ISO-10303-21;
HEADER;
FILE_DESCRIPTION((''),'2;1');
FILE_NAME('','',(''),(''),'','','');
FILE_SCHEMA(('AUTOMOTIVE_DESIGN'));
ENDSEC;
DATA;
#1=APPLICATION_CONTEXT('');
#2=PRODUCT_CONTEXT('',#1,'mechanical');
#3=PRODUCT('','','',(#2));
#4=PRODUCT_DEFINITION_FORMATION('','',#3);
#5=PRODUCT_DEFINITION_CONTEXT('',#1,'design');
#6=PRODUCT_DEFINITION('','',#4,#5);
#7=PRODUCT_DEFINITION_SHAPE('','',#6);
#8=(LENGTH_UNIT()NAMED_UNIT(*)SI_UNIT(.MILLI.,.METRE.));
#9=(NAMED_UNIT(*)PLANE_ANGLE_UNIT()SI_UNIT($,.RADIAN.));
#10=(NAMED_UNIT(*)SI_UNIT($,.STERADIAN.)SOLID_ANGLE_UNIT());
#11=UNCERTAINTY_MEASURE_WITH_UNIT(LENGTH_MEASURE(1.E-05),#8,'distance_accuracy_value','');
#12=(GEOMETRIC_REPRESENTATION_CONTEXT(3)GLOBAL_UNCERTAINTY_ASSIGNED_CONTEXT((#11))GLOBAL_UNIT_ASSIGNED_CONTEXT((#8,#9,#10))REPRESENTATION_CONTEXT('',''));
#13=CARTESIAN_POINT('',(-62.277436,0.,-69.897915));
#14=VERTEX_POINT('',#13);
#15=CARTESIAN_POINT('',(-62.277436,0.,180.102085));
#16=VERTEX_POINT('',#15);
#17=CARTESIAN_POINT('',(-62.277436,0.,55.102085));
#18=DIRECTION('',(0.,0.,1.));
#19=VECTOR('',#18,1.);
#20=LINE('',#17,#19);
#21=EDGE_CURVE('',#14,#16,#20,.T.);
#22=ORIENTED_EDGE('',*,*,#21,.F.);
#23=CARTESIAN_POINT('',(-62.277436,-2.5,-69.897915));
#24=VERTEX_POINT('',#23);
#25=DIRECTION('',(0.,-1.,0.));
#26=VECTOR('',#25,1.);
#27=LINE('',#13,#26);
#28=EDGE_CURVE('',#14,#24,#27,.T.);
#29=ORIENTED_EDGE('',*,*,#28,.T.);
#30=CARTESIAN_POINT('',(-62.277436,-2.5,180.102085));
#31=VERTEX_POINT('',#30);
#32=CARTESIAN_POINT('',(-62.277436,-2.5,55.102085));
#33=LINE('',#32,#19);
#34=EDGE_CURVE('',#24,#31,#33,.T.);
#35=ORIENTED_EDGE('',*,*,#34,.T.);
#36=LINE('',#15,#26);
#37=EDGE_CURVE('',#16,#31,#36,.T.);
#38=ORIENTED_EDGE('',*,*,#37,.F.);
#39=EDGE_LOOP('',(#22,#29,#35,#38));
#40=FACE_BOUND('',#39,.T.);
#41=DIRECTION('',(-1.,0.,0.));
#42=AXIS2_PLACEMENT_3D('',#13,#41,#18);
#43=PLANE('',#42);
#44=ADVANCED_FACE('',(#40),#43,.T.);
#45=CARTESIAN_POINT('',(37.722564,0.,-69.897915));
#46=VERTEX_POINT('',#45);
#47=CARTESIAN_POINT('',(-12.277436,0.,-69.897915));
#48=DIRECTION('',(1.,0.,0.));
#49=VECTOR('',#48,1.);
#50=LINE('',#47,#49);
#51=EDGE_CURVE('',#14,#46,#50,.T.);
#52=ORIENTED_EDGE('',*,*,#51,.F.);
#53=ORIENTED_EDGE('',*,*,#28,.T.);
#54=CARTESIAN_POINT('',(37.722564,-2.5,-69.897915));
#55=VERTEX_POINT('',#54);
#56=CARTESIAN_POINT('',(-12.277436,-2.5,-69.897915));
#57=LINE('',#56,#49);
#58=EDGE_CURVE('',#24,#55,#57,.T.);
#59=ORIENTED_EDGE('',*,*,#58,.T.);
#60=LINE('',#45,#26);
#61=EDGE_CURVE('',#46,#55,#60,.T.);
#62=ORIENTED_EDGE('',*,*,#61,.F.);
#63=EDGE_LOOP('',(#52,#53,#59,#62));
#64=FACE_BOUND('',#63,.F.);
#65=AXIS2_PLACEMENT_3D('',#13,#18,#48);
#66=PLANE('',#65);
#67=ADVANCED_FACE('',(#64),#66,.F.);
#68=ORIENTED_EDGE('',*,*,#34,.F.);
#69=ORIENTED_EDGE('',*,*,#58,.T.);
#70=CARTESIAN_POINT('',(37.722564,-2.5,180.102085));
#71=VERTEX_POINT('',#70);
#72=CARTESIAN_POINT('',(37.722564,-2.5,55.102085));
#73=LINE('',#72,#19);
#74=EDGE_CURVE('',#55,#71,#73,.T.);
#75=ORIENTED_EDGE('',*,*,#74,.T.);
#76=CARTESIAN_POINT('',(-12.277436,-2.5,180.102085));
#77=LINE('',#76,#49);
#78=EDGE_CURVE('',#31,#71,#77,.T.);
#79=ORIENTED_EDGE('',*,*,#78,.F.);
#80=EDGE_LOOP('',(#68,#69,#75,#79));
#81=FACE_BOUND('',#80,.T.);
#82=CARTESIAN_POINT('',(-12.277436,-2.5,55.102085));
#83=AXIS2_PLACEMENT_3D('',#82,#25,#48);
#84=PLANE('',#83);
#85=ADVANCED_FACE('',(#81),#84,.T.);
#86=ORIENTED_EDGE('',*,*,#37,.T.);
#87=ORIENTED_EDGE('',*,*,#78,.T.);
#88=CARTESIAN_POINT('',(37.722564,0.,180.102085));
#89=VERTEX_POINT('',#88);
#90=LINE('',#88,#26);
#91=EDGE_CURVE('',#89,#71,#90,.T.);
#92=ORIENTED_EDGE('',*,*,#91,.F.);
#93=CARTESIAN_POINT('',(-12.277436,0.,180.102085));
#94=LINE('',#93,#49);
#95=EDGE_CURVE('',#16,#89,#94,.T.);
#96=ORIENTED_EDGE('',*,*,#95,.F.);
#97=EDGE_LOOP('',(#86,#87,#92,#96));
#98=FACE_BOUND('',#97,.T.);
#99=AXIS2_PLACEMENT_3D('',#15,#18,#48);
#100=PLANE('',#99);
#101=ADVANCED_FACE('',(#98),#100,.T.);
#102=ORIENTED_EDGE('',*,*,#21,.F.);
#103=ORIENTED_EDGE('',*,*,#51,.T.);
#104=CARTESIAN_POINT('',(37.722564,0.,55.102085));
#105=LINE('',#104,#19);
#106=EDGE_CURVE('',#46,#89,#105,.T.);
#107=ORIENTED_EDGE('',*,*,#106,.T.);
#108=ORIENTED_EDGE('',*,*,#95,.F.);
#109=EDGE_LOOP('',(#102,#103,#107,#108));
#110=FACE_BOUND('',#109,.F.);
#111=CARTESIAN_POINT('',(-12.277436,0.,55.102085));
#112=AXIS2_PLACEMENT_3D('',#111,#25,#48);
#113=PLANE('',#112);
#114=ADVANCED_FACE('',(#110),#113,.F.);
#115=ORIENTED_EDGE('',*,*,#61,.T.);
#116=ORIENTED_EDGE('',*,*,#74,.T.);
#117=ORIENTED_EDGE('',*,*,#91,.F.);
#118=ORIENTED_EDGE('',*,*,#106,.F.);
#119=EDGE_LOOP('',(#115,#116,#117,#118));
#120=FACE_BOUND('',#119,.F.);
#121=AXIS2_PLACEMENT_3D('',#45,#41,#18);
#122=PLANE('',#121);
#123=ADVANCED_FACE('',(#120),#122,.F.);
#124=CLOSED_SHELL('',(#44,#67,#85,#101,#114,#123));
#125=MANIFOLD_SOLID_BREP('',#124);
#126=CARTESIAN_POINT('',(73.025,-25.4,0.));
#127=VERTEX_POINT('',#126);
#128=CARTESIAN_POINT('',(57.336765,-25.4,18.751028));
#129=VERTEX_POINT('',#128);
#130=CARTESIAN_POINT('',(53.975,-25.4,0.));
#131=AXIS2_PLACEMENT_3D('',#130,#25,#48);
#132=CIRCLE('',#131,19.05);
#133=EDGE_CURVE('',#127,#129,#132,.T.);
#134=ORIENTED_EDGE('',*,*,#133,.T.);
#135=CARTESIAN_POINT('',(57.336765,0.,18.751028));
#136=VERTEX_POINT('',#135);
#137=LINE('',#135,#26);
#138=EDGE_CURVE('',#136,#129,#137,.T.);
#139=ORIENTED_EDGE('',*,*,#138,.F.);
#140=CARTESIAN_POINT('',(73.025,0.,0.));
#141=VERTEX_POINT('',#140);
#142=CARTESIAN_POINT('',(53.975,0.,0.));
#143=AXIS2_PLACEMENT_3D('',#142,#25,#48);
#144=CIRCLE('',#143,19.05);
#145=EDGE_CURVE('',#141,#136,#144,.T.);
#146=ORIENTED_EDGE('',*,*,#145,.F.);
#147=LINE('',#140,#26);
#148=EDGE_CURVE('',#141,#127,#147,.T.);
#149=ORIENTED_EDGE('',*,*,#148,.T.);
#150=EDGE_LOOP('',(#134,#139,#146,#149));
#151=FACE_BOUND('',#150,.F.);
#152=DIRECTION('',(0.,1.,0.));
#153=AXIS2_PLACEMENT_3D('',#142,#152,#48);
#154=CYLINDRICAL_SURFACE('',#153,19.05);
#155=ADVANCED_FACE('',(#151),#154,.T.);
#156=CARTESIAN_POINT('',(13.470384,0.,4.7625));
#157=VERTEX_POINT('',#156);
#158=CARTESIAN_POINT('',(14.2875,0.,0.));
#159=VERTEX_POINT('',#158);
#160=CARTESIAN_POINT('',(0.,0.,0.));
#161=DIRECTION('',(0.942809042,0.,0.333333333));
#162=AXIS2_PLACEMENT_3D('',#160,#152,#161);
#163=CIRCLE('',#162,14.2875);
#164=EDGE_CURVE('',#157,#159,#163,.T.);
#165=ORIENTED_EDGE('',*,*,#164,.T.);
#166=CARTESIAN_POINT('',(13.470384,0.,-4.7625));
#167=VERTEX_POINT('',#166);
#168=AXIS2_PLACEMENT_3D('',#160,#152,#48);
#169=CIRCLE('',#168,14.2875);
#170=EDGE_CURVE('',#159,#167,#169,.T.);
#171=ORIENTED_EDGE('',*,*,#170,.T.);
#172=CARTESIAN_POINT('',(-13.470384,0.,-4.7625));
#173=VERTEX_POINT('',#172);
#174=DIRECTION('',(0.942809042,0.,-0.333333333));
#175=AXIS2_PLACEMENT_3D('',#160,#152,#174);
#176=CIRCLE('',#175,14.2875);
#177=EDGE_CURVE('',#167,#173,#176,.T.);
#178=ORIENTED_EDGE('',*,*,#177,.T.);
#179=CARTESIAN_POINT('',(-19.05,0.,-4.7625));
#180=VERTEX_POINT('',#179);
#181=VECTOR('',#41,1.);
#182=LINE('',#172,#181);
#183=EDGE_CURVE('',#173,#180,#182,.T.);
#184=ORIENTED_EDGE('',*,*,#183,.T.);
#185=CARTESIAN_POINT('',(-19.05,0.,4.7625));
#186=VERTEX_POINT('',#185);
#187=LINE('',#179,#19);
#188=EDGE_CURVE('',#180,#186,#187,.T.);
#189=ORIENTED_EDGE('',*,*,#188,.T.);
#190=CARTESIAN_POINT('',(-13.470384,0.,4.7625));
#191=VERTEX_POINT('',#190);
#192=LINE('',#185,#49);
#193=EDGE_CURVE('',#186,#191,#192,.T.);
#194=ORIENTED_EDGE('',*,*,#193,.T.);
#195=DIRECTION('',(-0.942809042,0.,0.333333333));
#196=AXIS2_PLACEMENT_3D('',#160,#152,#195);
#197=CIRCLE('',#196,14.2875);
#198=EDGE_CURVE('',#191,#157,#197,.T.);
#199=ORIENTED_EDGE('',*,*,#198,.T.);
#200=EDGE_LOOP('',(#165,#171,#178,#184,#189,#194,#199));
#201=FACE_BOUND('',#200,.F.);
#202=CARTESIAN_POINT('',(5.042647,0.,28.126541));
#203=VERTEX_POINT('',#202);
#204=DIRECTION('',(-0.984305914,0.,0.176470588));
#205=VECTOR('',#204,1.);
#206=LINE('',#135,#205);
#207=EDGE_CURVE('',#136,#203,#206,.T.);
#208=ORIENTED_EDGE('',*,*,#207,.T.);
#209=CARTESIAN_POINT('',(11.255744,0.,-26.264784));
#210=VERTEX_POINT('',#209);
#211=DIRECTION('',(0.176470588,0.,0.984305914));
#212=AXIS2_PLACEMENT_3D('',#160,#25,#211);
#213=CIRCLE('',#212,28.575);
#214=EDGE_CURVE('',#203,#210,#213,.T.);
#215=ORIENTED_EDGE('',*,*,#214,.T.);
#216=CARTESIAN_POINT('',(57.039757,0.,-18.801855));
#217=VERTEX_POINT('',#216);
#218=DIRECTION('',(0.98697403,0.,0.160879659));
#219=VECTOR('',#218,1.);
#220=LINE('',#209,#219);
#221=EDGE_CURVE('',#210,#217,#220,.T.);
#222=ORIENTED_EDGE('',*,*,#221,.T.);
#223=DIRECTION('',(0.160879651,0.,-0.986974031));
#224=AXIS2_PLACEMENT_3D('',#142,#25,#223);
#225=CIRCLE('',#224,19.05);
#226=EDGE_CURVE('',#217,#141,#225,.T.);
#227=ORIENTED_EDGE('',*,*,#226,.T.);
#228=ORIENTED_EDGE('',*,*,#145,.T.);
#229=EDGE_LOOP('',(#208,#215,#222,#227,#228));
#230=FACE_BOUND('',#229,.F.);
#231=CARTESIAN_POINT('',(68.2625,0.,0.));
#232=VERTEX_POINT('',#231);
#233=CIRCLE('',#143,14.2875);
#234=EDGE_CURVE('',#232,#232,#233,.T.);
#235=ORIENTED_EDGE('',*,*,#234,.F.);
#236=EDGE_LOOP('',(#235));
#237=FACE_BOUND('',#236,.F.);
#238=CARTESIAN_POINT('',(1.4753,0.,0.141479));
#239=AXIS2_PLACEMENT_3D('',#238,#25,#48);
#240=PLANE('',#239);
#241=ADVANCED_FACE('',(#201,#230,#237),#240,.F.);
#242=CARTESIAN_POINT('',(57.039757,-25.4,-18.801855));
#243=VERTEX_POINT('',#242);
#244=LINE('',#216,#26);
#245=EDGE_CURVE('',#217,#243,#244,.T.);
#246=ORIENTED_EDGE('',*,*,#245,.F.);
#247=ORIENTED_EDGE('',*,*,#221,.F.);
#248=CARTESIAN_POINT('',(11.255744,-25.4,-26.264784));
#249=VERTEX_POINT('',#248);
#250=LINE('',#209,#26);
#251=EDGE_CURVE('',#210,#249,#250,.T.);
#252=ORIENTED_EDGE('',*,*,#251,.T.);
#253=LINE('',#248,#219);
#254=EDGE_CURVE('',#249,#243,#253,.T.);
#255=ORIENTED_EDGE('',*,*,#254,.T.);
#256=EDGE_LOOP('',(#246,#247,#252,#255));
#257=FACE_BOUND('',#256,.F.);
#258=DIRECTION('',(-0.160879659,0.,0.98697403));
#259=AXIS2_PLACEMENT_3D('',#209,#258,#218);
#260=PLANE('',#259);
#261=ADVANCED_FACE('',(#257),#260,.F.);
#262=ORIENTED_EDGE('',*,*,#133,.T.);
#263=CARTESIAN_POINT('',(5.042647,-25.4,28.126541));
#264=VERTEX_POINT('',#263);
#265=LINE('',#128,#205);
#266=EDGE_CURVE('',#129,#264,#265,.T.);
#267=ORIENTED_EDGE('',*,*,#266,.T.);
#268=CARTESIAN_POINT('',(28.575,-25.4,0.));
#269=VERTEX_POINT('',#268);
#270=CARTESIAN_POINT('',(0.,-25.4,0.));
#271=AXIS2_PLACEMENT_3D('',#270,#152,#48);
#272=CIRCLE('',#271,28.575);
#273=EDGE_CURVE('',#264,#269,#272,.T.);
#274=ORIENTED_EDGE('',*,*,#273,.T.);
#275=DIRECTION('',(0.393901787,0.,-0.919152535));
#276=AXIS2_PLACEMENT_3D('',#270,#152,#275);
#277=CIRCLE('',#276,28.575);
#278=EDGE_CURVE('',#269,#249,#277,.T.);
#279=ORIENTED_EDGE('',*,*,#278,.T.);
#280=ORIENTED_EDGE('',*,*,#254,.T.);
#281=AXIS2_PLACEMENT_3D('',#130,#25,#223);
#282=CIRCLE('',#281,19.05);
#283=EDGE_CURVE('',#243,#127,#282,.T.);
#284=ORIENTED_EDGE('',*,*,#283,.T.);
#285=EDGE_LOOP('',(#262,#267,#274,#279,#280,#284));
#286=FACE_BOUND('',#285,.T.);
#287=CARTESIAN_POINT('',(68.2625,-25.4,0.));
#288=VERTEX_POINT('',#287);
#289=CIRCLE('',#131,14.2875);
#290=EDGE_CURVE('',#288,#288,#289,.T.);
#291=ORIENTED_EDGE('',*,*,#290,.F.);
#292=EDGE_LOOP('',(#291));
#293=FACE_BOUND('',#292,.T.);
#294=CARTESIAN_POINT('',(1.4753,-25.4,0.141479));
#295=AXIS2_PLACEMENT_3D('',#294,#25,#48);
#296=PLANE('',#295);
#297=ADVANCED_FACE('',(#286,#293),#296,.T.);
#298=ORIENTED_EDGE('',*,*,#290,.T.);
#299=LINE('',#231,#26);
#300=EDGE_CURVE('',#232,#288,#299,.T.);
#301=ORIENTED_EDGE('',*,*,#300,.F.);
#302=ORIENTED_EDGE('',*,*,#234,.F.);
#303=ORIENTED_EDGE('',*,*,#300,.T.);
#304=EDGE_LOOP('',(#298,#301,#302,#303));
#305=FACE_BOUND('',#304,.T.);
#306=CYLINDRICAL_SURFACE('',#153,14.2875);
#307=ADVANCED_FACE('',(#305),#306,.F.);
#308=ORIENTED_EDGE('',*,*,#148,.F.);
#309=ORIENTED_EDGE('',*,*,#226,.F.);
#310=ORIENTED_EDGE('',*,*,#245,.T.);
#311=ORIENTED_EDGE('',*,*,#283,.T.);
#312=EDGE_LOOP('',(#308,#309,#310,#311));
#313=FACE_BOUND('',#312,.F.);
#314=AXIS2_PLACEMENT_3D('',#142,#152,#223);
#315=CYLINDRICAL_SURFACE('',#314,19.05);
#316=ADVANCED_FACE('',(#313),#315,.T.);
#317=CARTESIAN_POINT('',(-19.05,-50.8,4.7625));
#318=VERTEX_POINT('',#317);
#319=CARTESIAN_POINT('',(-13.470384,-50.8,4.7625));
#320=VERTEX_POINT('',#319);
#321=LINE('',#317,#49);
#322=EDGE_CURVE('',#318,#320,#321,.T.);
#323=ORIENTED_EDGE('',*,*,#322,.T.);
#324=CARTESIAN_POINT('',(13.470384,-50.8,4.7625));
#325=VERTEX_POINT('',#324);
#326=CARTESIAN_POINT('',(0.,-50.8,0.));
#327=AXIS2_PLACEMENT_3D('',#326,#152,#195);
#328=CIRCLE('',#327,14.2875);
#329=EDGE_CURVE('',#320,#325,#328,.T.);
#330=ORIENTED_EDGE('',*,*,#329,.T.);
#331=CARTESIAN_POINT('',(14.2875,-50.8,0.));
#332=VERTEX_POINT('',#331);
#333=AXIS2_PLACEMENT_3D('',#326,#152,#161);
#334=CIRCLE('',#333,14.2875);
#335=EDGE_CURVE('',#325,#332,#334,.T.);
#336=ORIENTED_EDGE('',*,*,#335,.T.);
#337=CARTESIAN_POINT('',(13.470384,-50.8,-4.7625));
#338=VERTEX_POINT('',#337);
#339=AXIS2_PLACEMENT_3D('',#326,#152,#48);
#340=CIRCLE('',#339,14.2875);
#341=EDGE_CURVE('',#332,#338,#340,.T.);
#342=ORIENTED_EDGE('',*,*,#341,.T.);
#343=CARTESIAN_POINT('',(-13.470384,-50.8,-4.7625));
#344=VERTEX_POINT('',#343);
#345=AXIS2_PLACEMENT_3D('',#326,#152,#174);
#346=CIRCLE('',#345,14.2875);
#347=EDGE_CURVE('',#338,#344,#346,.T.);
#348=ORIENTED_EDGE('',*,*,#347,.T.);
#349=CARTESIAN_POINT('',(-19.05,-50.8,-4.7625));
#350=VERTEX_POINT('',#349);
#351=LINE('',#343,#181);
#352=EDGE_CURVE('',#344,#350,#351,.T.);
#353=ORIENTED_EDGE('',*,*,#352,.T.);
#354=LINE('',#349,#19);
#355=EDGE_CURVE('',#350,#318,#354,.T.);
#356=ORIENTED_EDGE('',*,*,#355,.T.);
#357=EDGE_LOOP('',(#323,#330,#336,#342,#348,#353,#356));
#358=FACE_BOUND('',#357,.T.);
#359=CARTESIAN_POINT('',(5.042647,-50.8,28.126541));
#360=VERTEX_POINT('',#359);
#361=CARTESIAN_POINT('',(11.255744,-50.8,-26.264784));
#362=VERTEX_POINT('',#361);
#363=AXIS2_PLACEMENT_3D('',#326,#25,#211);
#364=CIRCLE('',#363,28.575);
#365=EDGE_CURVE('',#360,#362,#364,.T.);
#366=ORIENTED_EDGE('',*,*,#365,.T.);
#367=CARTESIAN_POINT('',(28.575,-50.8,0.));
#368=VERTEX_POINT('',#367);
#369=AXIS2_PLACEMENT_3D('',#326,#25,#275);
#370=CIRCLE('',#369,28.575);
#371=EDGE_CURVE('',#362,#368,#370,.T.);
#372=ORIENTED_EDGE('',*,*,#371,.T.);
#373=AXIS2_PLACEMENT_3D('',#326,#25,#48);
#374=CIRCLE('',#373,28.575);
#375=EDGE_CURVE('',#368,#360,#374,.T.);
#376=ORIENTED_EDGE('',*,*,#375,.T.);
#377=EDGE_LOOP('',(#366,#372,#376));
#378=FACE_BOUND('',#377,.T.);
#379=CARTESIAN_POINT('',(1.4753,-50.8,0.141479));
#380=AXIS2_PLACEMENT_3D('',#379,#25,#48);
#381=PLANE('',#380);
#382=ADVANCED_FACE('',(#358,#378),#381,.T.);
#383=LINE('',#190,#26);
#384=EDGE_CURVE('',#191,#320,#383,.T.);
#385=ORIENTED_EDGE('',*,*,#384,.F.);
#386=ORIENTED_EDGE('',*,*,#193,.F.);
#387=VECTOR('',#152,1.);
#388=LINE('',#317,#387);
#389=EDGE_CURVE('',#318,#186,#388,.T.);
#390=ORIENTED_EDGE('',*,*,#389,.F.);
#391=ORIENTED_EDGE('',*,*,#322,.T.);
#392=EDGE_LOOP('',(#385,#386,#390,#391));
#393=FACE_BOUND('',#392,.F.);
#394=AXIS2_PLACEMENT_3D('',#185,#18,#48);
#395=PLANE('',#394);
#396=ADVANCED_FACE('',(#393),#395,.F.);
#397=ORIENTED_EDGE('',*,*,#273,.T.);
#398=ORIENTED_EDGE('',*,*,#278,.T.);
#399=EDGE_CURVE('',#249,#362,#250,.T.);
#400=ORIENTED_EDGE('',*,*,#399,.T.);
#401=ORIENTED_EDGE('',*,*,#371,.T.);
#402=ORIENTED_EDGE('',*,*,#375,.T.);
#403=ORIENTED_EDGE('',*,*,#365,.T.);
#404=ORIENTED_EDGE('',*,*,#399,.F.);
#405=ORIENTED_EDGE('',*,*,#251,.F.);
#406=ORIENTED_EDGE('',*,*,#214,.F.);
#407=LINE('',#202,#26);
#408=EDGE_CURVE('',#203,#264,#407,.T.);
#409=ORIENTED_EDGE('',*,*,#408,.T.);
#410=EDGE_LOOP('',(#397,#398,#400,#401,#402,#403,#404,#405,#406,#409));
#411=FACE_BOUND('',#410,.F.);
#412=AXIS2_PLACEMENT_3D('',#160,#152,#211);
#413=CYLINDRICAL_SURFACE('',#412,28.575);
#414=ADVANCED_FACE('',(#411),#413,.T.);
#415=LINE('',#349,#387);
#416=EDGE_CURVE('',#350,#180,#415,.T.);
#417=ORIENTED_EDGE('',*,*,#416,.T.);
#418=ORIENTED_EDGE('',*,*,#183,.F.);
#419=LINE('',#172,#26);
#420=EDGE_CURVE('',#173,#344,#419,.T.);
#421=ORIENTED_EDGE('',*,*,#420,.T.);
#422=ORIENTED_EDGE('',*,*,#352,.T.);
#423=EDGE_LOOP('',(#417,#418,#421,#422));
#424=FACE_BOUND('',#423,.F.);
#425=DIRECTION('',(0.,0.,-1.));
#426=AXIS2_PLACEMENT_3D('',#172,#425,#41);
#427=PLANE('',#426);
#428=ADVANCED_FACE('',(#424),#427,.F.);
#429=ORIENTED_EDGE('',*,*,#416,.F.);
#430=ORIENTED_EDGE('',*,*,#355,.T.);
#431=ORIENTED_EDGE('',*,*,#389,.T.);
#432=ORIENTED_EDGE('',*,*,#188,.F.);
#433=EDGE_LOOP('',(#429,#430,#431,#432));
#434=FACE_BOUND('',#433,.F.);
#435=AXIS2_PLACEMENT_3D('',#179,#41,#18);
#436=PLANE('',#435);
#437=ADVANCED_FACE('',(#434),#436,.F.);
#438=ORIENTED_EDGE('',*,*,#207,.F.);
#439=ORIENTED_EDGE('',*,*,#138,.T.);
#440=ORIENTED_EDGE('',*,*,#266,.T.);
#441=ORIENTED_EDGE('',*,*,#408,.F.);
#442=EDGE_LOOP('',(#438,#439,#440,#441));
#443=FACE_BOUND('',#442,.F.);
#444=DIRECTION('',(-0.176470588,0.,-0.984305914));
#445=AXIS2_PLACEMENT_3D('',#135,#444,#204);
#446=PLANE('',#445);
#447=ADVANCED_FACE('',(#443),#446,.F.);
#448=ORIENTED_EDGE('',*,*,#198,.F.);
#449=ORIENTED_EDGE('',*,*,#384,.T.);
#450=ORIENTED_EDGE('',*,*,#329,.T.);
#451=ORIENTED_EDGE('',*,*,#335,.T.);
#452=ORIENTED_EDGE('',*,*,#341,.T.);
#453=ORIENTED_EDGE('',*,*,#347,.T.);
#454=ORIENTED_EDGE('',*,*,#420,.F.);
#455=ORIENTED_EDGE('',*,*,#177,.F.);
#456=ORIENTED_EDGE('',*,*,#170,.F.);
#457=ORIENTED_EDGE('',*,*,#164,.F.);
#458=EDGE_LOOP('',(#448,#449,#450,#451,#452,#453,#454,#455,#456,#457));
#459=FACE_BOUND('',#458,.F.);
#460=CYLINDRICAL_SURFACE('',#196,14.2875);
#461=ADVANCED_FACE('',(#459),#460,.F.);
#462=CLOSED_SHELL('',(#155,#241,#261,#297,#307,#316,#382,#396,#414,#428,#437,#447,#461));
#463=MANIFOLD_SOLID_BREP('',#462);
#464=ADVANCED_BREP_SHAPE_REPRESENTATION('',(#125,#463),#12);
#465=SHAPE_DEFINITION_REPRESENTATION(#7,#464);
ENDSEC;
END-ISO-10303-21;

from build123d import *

# Parameters (mm, degrees)
F0_R     = 14.2875
F1_DEPTH = 25.4
F2_DEPTH = 50.8
F3_W     = 100
F3_H     = 250
F4_DEPTH = 2.5


# Not quite as in the source:
# - a feature of the source that left no trace in its solid (it failed there, or was rolled back) is left out


with BuildPart() as f1:
    # F0 (on Front) → F1 (new body)
    with BuildSketch(Plane.XZ):
        with BuildLine():
            ThreePointArc((11.2557435726, -26.2647836775), (23.8554343661, -15.7305078178), (28.575, 0))
            ThreePointArc((28.575, 0), (21.9160245563, 18.3362616868), (5.0426470588, 28.1265414802))
            ThreePointArc((5.0426470588, 28.1265414802), (-28.3903759644, -3.2430198275), (11.2557435726, -26.2647836775))
        make_face()
        with BuildLine():
            ThreePointArc((-13.4703841816, 4.7625), (0, 14.2875), (13.4703841816, 4.7625))
            Line((13.4703841816, 4.7625), (19.05, 4.7625))
            Line((19.05, 4.7625), (19.05, -4.7625))
            Line((19.05, -4.7625), (13.4703841816, -4.7625))
            ThreePointArc((13.4703841816, -4.7625), (0, -14.2875), (-13.4703841816, -4.7625))
            Line((-13.4703841816, -4.7625), (-19.05, -4.7625))
            Line((-19.05, -4.7625), (-19.05, 4.7625))
            Line((-19.05, 4.7625), (-13.4703841816, 4.7625))
        make_face(mode=Mode.SUBTRACT)
        with BuildLine():
            ThreePointArc((5.0426470588, 28.1265414802), (21.9160245563, 18.3362616868), (28.575, 0))
            ThreePointArc((28.575, 0), (23.8554343661, -15.7305078178), (11.2557435726, -26.2647836775))
            Line((11.2557435726, -26.2647836775), (57.0397573458, -18.8018552917))
            ThreePointArc((57.0397573458, -18.8018552917), (34.925595789, 0.1506625541), (57.3367647059, 18.7510276535))
            Line((57.3367647059, 18.7510276535), (5.0426470588, 28.1265414802))
        make_face()
        with BuildLine():
            ThreePointArc((73.025, 0), (68.5856830375, 12.2241744579), (57.3367647059, 18.7510276535))
            ThreePointArc((57.3367647059, 18.7510276535), (34.925595789, 0.1506625541), (57.0397573458, -18.8018552917))
            ThreePointArc((57.0397573458, -18.8018552917), (68.4885475925, -12.3393450508), (73.025, 0))
        make_face()
        with Locations((53.975, 0)):
            Circle(F0_R, mode=Mode.SUBTRACT)
    extrude(amount=F1_DEPTH)

    # F0 (on Front) → F2 (join)
    with BuildSketch(Plane.XZ):
        with BuildLine():
            ThreePointArc((11.2557435726, -26.2647836775), (23.8554343661, -15.7305078178), (28.575, 0))
            ThreePointArc((28.575, 0), (21.9160245563, 18.3362616868), (5.0426470588, 28.1265414802))
            ThreePointArc((5.0426470588, 28.1265414802), (-28.3903759644, -3.2430198275), (11.2557435726, -26.2647836775))
        make_face()
        with BuildLine():
            ThreePointArc((-13.4703841816, 4.7625), (0, 14.2875), (13.4703841816, 4.7625))
            Line((13.4703841816, 4.7625), (19.05, 4.7625))
            Line((19.05, 4.7625), (19.05, -4.7625))
            Line((19.05, -4.7625), (13.4703841816, -4.7625))
            ThreePointArc((13.4703841816, -4.7625), (0, -14.2875), (-13.4703841816, -4.7625))
            Line((-13.4703841816, -4.7625), (-19.05, -4.7625))
            Line((-19.05, -4.7625), (-19.05, 4.7625))
            Line((-19.05, 4.7625), (-13.4703841816, 4.7625))
        make_face(mode=Mode.SUBTRACT)
        with BuildLine():
            ThreePointArc((13.4703841816, 4.7625), (14.081739421, 2.416044521), (14.2875, 0))
            ThreePointArc((14.2875, 0), (14.081739421, -2.416044521), (13.4703841816, -4.7625))
            Line((13.4703841816, -4.7625), (19.05, -4.7625))
            Line((19.05, -4.7625), (19.05, 4.7625))
            Line((19.05, 4.7625), (13.4703841816, 4.7625))
        make_face()
    extrude(amount=F2_DEPTH)


with BuildPart() as f4:
    # F3 (on Front) → F4 (new body)
    with BuildSketch(Plane.XZ):
        with Locations((-12.2774355114, 55.1020845771)):
            Rectangle(F3_W, F3_H)
    extrude(amount=F4_DEPTH)


solid = Compound([f1.part, f4.part])
